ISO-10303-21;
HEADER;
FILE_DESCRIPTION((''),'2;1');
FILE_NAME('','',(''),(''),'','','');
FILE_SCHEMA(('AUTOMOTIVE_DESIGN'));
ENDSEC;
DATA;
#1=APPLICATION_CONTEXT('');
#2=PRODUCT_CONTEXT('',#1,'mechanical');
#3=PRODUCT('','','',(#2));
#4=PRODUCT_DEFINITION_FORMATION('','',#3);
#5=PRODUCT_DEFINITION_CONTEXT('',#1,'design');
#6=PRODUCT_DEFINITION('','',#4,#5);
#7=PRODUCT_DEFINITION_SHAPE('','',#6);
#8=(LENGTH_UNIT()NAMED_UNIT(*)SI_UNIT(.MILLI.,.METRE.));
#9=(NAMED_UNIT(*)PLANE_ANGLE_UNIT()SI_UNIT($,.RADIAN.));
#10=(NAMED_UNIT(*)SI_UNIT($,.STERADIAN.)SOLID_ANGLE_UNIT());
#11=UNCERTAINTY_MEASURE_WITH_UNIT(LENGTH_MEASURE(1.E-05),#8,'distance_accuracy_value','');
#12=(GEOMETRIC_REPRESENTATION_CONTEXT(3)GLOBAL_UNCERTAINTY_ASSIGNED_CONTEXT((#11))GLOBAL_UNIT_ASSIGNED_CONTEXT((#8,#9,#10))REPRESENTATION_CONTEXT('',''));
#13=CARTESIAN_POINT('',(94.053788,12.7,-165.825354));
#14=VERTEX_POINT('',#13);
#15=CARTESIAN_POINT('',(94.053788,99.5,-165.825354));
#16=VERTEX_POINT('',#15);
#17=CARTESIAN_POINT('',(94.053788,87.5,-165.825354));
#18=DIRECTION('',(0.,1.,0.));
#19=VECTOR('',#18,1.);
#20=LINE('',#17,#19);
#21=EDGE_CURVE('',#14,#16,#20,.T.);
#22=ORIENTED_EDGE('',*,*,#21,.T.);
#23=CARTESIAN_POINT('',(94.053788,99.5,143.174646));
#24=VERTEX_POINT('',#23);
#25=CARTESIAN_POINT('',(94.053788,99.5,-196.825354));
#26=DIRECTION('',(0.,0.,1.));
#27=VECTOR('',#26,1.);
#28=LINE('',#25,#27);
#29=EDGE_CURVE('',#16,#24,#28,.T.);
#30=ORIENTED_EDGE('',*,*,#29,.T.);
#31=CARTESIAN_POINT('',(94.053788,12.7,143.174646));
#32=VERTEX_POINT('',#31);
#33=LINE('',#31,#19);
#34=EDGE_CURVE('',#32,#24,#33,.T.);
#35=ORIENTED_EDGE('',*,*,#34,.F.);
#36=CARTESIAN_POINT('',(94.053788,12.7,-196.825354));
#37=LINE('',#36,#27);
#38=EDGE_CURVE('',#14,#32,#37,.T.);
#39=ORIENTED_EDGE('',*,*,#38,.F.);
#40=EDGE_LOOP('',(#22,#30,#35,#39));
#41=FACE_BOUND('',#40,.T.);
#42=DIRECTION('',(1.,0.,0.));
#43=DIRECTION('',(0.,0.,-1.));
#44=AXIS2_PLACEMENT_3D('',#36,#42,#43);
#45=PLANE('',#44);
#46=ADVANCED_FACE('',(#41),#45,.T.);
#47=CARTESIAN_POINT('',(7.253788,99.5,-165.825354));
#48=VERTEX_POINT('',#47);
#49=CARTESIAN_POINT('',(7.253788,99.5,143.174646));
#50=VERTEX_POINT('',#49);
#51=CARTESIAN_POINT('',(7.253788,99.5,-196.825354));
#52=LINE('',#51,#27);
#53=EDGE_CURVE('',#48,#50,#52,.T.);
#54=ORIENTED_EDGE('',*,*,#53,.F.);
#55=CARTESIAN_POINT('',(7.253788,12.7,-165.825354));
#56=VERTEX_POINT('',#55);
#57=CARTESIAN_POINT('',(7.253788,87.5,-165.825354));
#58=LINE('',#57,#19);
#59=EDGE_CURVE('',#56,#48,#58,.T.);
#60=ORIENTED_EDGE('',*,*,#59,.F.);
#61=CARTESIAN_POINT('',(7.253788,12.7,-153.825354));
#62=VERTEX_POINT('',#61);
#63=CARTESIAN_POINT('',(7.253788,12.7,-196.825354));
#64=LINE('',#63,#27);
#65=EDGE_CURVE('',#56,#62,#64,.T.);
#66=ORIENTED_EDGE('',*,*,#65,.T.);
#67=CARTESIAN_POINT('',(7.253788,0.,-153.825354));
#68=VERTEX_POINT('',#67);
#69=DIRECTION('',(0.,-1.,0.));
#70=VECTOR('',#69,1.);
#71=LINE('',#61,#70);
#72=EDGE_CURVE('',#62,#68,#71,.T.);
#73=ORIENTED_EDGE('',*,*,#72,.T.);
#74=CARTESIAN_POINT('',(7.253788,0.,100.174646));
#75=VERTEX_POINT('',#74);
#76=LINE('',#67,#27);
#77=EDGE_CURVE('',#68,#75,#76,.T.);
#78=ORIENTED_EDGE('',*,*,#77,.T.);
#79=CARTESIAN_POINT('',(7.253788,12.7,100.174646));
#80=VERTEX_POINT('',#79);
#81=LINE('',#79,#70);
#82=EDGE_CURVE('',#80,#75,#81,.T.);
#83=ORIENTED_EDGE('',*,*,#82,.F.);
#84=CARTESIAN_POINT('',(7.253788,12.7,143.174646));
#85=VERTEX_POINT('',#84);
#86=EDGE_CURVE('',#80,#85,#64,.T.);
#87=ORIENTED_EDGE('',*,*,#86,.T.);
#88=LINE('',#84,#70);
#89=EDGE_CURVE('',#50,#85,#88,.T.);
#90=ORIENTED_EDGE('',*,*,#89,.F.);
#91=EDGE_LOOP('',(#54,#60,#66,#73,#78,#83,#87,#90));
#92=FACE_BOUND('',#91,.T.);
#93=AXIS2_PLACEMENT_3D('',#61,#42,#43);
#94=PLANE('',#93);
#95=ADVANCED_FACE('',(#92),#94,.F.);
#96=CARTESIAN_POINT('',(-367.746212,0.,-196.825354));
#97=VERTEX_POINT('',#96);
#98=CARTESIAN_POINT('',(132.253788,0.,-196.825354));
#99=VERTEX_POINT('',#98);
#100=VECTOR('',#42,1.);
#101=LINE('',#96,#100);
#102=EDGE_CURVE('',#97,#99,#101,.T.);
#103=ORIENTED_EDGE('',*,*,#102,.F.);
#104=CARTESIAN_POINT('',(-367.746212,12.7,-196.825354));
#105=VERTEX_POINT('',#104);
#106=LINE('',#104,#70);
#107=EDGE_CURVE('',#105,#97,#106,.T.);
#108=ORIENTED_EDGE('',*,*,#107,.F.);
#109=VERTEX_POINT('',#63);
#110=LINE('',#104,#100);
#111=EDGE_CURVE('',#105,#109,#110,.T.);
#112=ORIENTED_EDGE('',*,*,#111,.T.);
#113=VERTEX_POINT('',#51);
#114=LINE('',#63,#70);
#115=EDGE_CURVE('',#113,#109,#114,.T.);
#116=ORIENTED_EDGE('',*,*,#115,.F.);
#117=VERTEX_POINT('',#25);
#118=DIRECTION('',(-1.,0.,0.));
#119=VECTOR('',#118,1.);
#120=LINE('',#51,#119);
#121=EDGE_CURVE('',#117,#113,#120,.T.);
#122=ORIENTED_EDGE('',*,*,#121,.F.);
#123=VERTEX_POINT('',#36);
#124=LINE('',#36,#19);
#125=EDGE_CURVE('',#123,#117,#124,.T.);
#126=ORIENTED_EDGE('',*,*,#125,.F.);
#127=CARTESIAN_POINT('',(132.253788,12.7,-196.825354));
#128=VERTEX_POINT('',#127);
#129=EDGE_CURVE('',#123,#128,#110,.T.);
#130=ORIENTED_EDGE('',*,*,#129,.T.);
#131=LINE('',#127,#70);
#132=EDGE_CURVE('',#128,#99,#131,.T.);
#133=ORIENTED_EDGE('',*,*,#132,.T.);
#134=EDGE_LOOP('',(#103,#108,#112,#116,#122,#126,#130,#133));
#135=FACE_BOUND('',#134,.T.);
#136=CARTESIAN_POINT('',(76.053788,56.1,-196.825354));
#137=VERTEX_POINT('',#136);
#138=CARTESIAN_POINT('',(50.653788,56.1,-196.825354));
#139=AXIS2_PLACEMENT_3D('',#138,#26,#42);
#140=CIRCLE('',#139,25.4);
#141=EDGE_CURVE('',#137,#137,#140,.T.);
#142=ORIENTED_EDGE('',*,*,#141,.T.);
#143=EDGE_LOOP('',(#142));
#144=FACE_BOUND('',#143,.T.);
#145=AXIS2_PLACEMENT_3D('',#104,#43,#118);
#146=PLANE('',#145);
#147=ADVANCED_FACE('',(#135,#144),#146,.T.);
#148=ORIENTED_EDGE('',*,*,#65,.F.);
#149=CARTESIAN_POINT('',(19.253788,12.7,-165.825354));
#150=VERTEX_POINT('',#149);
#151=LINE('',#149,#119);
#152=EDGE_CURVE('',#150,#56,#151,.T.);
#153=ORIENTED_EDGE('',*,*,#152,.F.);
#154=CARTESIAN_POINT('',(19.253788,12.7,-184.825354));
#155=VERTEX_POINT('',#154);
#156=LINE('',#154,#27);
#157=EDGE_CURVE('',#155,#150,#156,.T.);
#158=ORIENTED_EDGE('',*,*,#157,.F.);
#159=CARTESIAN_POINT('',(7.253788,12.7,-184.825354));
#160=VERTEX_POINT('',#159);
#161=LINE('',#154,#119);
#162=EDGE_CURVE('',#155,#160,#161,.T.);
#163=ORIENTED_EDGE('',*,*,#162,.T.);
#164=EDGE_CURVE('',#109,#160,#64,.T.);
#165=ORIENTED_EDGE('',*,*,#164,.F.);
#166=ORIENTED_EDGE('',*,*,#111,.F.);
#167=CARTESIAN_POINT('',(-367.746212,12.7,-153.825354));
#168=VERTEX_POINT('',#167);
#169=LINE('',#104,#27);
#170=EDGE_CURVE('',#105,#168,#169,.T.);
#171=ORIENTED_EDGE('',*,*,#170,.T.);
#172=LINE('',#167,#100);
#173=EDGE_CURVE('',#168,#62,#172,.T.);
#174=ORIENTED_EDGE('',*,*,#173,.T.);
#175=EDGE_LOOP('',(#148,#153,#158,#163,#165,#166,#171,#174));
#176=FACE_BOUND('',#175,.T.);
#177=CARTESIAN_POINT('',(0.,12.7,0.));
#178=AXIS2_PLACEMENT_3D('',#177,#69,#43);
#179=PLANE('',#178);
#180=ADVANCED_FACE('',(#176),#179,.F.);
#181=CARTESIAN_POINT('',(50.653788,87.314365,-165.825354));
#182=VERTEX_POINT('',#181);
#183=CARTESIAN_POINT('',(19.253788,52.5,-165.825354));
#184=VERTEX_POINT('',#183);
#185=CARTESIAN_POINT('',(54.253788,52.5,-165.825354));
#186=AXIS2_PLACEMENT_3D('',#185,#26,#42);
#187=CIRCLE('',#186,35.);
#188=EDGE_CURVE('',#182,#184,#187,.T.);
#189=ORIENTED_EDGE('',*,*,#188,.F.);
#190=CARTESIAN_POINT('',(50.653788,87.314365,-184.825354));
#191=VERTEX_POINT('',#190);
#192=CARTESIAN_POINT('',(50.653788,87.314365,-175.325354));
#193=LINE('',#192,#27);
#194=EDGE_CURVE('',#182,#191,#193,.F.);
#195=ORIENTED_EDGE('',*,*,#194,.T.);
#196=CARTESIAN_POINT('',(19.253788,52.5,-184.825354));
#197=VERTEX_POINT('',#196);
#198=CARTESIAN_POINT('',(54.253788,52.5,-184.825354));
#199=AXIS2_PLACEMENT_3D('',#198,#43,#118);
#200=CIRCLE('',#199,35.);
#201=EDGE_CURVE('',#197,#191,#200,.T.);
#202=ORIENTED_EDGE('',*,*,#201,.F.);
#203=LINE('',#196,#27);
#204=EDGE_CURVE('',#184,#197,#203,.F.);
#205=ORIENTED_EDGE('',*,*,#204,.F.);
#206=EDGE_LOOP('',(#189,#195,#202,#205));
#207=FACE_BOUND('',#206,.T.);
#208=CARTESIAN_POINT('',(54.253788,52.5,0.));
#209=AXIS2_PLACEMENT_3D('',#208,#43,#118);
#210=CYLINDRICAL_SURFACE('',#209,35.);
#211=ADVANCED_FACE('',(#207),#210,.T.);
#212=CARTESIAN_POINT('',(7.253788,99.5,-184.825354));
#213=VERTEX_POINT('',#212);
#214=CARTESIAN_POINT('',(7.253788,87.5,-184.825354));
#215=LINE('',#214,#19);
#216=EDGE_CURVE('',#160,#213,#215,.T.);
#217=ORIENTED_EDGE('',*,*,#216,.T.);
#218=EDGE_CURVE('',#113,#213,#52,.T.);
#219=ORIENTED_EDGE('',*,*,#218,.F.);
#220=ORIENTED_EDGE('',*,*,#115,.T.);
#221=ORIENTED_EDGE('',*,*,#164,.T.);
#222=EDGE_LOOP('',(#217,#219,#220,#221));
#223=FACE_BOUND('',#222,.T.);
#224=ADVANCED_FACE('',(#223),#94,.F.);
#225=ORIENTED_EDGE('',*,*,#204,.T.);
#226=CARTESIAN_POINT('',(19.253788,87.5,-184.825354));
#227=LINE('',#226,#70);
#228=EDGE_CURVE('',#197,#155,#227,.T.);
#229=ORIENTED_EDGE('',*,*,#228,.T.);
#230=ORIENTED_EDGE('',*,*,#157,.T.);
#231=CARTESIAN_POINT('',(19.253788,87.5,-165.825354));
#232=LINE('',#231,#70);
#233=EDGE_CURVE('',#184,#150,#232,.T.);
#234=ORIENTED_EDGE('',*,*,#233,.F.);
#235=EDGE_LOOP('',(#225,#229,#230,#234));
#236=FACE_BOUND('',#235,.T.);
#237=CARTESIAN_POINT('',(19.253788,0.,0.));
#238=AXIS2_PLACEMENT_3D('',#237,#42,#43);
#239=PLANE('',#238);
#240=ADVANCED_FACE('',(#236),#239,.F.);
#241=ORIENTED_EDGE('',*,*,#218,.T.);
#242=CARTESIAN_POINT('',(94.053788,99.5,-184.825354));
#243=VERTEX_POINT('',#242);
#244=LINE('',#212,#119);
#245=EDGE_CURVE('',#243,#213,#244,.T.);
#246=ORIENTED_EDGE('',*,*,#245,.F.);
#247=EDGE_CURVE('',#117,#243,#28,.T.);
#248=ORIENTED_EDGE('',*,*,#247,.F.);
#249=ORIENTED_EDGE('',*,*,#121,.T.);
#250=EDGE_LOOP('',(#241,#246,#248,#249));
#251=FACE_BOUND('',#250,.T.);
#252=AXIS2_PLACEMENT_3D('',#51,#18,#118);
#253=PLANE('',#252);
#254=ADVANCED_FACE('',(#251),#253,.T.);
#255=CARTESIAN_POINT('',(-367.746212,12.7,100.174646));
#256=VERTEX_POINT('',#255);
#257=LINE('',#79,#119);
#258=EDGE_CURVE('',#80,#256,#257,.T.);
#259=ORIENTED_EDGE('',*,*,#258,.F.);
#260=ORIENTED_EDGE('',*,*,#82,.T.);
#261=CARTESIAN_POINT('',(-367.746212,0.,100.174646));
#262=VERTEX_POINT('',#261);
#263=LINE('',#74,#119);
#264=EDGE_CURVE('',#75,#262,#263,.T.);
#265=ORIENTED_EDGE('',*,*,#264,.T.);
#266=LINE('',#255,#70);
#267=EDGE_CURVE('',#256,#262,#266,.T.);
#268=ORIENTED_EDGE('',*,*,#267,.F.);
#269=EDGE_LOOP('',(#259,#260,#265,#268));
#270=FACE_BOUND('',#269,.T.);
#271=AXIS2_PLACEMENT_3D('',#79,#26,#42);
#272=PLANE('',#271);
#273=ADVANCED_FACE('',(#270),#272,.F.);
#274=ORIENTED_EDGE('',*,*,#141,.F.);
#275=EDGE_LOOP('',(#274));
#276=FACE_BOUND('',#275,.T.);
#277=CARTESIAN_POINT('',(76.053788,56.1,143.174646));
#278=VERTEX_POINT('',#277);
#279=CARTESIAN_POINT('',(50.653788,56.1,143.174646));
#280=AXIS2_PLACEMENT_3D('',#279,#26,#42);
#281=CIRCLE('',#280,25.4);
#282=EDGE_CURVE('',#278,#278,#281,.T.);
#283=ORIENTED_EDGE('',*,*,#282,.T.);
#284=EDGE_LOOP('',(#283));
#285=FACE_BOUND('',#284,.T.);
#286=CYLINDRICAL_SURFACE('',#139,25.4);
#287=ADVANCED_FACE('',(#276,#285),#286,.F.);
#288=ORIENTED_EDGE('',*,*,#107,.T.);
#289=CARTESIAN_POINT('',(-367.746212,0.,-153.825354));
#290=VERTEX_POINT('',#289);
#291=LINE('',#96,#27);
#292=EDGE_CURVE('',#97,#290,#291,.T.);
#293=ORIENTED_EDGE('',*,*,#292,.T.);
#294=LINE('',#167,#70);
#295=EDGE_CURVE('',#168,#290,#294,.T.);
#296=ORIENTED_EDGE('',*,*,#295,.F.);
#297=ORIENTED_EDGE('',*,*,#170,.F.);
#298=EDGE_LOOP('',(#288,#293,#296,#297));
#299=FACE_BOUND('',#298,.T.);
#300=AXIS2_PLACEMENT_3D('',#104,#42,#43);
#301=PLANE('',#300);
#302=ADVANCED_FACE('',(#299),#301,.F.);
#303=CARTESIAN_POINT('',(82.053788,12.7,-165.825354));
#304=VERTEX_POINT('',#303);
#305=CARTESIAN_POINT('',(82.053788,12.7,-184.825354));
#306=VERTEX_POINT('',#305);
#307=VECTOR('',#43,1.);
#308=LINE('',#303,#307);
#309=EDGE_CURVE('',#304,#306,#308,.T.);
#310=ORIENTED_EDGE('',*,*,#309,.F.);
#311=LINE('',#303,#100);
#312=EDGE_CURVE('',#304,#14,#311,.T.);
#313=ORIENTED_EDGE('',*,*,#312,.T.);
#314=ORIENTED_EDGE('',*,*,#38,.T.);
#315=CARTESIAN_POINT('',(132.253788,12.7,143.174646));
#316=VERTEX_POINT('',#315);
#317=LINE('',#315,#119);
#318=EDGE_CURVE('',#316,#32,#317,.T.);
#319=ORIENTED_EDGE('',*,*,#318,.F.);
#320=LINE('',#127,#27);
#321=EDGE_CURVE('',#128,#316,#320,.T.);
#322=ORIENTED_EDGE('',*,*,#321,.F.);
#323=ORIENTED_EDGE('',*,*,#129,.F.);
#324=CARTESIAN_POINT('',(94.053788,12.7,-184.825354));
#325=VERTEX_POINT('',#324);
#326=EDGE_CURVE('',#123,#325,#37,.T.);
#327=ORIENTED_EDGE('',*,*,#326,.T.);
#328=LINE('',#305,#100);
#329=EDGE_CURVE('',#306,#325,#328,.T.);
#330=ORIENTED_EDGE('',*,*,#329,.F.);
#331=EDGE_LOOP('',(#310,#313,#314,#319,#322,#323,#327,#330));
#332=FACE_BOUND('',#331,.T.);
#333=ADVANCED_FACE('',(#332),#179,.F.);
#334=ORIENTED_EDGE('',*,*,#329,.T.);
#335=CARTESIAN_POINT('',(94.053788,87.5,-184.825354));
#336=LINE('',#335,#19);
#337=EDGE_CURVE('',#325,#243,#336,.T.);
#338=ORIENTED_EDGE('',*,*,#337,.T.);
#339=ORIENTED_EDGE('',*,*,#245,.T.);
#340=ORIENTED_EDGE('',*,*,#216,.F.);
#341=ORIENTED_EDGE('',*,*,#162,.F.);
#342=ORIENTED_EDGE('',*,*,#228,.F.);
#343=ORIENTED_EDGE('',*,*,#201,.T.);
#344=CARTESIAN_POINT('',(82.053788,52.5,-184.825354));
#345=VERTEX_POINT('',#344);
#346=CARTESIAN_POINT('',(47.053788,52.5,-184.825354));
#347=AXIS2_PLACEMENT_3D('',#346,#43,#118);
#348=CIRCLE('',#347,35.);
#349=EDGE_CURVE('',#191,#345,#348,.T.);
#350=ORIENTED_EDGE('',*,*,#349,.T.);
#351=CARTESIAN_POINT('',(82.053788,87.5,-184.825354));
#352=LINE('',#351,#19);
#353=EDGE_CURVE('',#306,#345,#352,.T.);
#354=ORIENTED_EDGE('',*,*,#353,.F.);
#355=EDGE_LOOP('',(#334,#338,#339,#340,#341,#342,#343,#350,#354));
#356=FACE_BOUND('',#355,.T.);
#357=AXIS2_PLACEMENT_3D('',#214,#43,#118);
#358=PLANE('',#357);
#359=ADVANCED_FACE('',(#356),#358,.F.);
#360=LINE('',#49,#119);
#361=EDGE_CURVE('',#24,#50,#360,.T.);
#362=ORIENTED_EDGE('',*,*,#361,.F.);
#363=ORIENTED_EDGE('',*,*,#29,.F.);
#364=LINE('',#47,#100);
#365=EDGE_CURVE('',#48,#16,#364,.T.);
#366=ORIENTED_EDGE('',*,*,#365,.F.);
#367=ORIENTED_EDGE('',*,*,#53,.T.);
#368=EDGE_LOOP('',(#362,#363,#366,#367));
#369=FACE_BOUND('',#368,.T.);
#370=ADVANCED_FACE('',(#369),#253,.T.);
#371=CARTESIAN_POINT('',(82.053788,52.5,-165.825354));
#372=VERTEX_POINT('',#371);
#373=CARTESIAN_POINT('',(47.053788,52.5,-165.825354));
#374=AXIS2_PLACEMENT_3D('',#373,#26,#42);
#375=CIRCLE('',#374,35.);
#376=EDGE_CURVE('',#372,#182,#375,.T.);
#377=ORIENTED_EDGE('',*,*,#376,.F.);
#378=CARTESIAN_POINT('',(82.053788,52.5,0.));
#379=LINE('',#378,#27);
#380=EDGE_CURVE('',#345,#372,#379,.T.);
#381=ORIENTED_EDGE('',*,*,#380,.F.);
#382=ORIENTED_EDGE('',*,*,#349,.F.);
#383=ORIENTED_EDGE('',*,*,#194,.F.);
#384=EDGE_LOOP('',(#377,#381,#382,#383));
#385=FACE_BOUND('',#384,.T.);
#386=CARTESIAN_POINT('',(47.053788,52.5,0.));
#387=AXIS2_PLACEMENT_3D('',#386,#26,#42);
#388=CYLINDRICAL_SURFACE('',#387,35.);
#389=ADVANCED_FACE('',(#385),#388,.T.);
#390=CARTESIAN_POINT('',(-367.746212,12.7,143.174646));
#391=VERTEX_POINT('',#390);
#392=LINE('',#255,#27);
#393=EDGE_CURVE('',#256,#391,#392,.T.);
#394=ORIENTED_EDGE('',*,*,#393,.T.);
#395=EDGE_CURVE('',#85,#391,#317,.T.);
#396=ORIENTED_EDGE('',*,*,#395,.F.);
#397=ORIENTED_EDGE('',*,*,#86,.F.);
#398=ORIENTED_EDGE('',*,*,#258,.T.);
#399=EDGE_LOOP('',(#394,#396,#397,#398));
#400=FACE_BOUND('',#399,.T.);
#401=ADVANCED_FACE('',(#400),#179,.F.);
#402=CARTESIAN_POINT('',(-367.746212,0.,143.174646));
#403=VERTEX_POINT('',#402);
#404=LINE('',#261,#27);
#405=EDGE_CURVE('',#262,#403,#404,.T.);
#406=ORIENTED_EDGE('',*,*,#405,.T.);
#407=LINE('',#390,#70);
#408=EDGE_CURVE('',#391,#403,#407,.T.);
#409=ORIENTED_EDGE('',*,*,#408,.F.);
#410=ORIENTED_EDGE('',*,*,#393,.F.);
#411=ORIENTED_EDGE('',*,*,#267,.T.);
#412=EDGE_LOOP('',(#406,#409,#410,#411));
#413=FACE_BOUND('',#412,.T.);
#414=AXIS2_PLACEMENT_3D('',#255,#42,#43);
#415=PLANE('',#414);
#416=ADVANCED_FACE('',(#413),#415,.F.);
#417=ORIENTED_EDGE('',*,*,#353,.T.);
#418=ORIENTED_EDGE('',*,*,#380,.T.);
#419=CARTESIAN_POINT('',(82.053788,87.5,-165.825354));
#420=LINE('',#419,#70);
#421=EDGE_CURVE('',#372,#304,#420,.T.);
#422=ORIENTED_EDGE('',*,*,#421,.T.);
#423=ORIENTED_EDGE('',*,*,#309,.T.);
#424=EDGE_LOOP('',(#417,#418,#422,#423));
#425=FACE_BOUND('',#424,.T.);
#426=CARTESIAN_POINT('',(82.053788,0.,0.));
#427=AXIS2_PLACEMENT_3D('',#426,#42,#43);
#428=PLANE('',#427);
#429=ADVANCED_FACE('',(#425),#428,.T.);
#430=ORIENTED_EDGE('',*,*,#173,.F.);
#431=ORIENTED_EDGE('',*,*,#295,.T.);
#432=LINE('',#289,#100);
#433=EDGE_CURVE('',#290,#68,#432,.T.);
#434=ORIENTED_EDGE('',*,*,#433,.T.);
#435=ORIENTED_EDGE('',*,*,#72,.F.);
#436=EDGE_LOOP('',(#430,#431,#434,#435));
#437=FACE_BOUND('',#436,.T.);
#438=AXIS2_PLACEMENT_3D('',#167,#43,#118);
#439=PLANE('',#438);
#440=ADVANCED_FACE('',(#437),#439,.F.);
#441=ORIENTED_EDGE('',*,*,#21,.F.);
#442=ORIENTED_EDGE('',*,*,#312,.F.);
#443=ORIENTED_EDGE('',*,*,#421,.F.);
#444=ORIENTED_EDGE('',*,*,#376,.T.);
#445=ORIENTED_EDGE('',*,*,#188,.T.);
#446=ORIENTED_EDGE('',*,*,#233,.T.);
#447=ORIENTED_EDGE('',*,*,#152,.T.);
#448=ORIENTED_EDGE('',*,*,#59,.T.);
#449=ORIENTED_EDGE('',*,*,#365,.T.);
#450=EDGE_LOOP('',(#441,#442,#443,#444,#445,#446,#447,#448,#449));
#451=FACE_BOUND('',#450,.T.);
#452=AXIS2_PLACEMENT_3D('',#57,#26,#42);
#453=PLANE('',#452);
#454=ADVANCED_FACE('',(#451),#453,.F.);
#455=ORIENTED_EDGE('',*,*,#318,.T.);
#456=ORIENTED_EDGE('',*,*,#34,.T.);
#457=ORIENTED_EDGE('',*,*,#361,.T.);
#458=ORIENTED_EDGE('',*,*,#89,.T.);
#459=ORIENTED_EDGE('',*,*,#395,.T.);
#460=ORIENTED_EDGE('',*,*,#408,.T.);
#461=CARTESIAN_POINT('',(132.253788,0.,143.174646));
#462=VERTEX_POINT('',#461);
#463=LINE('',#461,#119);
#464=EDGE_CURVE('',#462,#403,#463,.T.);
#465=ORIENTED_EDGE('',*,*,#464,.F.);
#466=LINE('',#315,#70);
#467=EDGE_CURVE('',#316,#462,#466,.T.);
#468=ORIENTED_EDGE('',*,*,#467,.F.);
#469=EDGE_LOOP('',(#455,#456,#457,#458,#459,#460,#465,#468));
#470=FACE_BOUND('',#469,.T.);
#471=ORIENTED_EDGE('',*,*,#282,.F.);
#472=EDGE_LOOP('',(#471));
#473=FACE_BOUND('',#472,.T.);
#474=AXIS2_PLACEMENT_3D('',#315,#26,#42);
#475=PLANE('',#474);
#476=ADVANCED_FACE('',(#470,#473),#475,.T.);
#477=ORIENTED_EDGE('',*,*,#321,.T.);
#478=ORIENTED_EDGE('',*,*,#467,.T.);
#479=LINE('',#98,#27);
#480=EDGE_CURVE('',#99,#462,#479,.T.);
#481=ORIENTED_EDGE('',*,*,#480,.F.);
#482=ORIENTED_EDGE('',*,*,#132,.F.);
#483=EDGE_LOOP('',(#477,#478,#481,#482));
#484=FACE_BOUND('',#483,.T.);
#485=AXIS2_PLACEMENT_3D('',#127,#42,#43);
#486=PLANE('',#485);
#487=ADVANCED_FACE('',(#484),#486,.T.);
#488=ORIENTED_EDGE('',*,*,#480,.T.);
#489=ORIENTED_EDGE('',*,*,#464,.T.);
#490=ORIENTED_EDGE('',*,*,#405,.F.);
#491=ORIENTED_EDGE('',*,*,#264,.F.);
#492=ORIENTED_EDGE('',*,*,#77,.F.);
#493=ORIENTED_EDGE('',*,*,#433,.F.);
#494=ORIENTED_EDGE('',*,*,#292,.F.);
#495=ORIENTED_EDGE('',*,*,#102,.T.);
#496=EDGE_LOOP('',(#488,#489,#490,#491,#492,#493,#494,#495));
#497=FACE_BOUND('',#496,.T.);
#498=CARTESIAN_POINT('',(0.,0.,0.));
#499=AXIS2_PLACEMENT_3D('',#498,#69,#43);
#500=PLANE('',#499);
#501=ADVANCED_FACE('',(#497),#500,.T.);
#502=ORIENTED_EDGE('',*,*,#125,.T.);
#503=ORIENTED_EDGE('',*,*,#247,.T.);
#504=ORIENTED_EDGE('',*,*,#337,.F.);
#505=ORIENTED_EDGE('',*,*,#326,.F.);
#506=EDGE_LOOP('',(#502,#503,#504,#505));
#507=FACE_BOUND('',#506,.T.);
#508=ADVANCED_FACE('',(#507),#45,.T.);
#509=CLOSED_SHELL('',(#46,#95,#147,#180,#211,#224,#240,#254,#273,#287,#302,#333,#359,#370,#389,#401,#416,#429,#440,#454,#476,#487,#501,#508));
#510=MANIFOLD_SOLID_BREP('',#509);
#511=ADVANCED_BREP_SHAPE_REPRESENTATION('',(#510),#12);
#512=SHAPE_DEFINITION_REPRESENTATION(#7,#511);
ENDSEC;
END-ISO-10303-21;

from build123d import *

# Parameters (mm, degrees)
BOSS_EXTRUDE1_DEPTH = 12.7
SKETCH4_W           = 86.8
SKETCH4_H           = 86.8
SKETCH4_R           = 25.4
BOSS_EXTRUDE3_DEPTH = 340
SKETCH6_W           = 86.8
SKETCH6_H           = 19
CUT_EXTRUDE3_DEPTH  = 12
SKETCH7_W           = 19
SKETCH7_H           = 74.8
CUT_EXTRUDE4_DEPTH  = 12
SKETCH8_W           = 19
SKETCH8_H           = 74.8
CUT_EXTRUDE5_DEPTH  = 12
FILLET2_R           = 35


with BuildPart() as part:
    # Sketch1 → Boss-Extrude1 (new body)
    with BuildSketch(Plane(origin=(0, 0, 0), x_dir=(1, 0, 0), z_dir=(0, 1, 0))):
        Polygon((-367.746211961, 196.825353899), (132.253788039, 196.825353899), (132.253788039, -143.174646101), (-367.746211961, -143.174646101), (-367.746211961, -100.174646101), (7.253788039, -100.174646101), (7.253788039, 153.825353899), (-367.746211961, 153.825353899), align=None)
    extrude(amount=BOSS_EXTRUDE1_DEPTH)

    # Sketch4 → Boss-Extrude3 (add)
    with BuildSketch(Plane.XY.offset(143.174646101)):
        with Locations((50.653788039, 56.1)):
            Rectangle(SKETCH4_W, SKETCH4_H)
        with Locations((50.653788039, 56.1)):
            Circle(SKETCH4_R, mode=Mode.SUBTRACT)
    extrude(amount=-BOSS_EXTRUDE3_DEPTH)

    # Sketch6 → Cut-Extrude3 (cut)
    with BuildSketch(Plane(origin=(0, 99.5, 0), x_dir=(1, 0, 0), z_dir=(0, 1, 0))):
        with Locations((50.653788039, 175.325353899)):
            Rectangle(SKETCH6_W, SKETCH6_H)
    extrude(amount=-CUT_EXTRUDE3_DEPTH, mode=Mode.SUBTRACT)

    # Sketch7 → Cut-Extrude4 (cut)
    with BuildSketch(Plane.ZY.offset(-7.253788039)):
        with Locations((-175.325353899, 50.1)):
            Rectangle(SKETCH7_W, SKETCH7_H)
    extrude(amount=-CUT_EXTRUDE4_DEPTH, mode=Mode.SUBTRACT)

    # Sketch8 → Cut-Extrude5 (cut)
    with BuildSketch(Plane(origin=(94.053788039, 0, 0), x_dir=(0, 0, -1), z_dir=(1, 0, 0))):
        with Locations((175.325353899, 50.1)):
            Rectangle(SKETCH8_W, SKETCH8_H)
    extrude(amount=-CUT_EXTRUDE5_DEPTH, mode=Mode.SUBTRACT)

    # Fillet2
    # the kernel refuses this fillet: 35 mm, written as the material it takes off along each edge
    with BuildSketch(Plane(origin=(82.053788039, 87.5, -165.825353899), x_dir=(-1, 0, 0), z_dir=(0, 0, -1))) as fillet2_piece_1:
        with BuildLine():
            CenterArc((FILLET2_R, -FILLET2_R), FILLET2_R, 90, 90)
            Line((0, -FILLET2_R), (0, 0))
            Line((0, 0), (FILLET2_R, 0))
        make_face()
    extrude(amount=19, mode=Mode.SUBTRACT)
    with BuildSketch(Plane(origin=(19.253788039, 87.5, -184.825353899), x_dir=(0, -1, 0), z_dir=(0, 0, 1))) as fillet2_piece_2:
        with BuildLine():
            CenterArc((FILLET2_R, FILLET2_R), FILLET2_R, 180, 90)
            Line((0, FILLET2_R), (0, 0))
            Line((0, 0), (FILLET2_R, 0))
        make_face()
    extrude(amount=19, mode=Mode.SUBTRACT)


solid = part.part
